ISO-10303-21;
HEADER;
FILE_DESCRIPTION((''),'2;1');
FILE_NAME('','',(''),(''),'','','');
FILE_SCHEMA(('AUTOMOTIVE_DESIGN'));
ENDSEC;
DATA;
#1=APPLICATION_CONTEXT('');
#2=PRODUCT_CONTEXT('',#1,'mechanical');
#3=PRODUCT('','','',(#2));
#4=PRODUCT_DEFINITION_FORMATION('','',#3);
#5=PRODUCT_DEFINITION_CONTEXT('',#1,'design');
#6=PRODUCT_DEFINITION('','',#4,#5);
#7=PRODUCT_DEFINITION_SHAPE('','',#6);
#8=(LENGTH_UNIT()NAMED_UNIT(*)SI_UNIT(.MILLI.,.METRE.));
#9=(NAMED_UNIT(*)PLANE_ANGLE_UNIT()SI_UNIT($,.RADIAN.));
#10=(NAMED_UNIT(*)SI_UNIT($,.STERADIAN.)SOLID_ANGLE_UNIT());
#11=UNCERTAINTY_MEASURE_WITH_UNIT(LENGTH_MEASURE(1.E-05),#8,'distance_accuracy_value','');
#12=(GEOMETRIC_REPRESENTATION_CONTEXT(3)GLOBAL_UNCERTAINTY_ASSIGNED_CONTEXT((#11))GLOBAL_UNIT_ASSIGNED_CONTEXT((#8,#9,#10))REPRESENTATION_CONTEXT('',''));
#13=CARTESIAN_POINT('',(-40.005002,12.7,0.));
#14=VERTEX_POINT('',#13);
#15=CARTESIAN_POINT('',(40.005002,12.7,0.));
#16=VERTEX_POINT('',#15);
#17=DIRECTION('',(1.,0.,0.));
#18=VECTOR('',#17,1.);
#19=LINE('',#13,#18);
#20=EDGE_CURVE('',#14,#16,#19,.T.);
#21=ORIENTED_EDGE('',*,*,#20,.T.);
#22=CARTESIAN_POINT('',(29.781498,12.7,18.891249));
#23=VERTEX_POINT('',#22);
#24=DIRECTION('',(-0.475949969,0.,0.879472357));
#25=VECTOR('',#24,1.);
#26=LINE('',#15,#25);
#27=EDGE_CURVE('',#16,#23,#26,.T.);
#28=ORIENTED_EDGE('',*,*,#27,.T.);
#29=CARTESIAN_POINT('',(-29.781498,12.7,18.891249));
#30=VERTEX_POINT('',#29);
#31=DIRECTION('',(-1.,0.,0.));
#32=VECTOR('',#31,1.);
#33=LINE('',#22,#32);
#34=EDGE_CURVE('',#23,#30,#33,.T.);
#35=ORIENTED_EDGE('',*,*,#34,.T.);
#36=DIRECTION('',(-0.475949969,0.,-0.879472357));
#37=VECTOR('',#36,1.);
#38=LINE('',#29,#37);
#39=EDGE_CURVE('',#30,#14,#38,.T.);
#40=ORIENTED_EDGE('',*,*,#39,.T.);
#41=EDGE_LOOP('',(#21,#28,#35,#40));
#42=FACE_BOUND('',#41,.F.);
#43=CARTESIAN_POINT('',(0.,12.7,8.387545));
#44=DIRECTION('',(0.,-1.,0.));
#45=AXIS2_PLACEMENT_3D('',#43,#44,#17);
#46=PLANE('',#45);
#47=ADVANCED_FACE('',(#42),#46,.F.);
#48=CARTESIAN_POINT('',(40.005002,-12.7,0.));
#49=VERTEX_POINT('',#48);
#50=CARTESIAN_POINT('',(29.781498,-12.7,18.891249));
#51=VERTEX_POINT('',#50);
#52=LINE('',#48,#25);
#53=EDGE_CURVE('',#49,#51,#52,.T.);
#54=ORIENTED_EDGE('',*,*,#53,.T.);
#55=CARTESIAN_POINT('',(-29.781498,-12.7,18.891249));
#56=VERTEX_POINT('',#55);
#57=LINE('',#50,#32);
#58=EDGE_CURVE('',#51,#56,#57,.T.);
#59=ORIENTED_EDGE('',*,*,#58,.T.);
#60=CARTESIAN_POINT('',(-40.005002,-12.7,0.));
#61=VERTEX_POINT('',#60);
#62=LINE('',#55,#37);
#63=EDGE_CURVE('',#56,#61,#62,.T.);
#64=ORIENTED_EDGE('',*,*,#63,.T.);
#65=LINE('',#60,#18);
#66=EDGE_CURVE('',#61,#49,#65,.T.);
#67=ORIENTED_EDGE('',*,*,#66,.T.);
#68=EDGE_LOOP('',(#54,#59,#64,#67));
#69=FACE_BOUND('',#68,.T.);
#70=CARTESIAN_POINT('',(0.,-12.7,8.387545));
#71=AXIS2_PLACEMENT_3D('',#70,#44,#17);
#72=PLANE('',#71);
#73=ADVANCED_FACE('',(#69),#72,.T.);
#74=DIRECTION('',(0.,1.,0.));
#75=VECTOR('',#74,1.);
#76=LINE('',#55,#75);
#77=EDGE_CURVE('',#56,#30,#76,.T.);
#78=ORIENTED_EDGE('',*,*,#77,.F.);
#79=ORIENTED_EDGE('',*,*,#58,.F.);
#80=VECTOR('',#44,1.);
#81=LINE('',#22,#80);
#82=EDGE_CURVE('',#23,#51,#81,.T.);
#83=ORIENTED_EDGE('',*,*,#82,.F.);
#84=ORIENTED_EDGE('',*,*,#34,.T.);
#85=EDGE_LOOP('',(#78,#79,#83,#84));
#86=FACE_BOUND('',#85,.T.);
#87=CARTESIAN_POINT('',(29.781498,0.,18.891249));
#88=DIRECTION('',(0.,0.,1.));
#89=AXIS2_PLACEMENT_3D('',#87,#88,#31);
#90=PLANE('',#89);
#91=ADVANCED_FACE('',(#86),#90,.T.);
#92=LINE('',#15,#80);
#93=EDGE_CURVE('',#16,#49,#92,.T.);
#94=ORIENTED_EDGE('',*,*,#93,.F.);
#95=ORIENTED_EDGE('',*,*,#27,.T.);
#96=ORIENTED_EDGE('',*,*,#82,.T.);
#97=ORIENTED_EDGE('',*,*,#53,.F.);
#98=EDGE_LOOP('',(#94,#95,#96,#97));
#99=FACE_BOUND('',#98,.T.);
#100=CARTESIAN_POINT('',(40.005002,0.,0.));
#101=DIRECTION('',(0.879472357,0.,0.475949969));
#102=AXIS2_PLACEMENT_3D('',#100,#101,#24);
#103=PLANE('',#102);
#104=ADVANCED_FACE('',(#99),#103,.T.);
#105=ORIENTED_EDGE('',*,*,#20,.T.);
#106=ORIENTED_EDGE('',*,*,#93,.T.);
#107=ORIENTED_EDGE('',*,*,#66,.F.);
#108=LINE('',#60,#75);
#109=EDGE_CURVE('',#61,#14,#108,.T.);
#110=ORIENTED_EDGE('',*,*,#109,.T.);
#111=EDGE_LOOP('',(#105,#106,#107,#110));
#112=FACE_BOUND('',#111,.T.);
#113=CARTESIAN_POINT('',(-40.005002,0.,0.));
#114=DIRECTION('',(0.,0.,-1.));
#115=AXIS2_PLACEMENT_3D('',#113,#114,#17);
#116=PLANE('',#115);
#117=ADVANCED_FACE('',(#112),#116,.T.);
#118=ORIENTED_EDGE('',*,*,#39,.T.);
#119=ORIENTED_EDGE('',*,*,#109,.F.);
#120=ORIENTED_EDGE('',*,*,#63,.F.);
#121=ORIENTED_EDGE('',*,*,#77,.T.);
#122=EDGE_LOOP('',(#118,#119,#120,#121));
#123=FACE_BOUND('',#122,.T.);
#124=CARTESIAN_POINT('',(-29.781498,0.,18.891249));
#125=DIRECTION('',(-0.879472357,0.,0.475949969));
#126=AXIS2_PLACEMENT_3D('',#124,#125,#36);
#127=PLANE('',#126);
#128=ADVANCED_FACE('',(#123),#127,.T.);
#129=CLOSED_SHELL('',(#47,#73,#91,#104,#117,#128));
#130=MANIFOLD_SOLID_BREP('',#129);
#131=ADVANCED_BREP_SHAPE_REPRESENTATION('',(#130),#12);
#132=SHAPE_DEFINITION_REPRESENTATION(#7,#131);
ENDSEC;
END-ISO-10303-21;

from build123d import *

# Parameters (mm, degrees)
F1_DEPTH = 12.7


# Not quite as in the source:
# - the program builds the solid bodies; features that only make, move or delete a surface that nothing else refers to are left out


with BuildPart() as f1:
    # F0 (on Front) → F1 (new body, symmetric)
    with BuildSketch(Plane.XZ):
        Polygon((-40.0050021708, 0), (0, 0), (40.0050021708, 0), (29.7814980149, 18.891248852), (0, 18.891248852), (-29.7814980149, 18.891248852), align=None)
    extrude(amount=F1_DEPTH, both=True)


solid = f1.part
